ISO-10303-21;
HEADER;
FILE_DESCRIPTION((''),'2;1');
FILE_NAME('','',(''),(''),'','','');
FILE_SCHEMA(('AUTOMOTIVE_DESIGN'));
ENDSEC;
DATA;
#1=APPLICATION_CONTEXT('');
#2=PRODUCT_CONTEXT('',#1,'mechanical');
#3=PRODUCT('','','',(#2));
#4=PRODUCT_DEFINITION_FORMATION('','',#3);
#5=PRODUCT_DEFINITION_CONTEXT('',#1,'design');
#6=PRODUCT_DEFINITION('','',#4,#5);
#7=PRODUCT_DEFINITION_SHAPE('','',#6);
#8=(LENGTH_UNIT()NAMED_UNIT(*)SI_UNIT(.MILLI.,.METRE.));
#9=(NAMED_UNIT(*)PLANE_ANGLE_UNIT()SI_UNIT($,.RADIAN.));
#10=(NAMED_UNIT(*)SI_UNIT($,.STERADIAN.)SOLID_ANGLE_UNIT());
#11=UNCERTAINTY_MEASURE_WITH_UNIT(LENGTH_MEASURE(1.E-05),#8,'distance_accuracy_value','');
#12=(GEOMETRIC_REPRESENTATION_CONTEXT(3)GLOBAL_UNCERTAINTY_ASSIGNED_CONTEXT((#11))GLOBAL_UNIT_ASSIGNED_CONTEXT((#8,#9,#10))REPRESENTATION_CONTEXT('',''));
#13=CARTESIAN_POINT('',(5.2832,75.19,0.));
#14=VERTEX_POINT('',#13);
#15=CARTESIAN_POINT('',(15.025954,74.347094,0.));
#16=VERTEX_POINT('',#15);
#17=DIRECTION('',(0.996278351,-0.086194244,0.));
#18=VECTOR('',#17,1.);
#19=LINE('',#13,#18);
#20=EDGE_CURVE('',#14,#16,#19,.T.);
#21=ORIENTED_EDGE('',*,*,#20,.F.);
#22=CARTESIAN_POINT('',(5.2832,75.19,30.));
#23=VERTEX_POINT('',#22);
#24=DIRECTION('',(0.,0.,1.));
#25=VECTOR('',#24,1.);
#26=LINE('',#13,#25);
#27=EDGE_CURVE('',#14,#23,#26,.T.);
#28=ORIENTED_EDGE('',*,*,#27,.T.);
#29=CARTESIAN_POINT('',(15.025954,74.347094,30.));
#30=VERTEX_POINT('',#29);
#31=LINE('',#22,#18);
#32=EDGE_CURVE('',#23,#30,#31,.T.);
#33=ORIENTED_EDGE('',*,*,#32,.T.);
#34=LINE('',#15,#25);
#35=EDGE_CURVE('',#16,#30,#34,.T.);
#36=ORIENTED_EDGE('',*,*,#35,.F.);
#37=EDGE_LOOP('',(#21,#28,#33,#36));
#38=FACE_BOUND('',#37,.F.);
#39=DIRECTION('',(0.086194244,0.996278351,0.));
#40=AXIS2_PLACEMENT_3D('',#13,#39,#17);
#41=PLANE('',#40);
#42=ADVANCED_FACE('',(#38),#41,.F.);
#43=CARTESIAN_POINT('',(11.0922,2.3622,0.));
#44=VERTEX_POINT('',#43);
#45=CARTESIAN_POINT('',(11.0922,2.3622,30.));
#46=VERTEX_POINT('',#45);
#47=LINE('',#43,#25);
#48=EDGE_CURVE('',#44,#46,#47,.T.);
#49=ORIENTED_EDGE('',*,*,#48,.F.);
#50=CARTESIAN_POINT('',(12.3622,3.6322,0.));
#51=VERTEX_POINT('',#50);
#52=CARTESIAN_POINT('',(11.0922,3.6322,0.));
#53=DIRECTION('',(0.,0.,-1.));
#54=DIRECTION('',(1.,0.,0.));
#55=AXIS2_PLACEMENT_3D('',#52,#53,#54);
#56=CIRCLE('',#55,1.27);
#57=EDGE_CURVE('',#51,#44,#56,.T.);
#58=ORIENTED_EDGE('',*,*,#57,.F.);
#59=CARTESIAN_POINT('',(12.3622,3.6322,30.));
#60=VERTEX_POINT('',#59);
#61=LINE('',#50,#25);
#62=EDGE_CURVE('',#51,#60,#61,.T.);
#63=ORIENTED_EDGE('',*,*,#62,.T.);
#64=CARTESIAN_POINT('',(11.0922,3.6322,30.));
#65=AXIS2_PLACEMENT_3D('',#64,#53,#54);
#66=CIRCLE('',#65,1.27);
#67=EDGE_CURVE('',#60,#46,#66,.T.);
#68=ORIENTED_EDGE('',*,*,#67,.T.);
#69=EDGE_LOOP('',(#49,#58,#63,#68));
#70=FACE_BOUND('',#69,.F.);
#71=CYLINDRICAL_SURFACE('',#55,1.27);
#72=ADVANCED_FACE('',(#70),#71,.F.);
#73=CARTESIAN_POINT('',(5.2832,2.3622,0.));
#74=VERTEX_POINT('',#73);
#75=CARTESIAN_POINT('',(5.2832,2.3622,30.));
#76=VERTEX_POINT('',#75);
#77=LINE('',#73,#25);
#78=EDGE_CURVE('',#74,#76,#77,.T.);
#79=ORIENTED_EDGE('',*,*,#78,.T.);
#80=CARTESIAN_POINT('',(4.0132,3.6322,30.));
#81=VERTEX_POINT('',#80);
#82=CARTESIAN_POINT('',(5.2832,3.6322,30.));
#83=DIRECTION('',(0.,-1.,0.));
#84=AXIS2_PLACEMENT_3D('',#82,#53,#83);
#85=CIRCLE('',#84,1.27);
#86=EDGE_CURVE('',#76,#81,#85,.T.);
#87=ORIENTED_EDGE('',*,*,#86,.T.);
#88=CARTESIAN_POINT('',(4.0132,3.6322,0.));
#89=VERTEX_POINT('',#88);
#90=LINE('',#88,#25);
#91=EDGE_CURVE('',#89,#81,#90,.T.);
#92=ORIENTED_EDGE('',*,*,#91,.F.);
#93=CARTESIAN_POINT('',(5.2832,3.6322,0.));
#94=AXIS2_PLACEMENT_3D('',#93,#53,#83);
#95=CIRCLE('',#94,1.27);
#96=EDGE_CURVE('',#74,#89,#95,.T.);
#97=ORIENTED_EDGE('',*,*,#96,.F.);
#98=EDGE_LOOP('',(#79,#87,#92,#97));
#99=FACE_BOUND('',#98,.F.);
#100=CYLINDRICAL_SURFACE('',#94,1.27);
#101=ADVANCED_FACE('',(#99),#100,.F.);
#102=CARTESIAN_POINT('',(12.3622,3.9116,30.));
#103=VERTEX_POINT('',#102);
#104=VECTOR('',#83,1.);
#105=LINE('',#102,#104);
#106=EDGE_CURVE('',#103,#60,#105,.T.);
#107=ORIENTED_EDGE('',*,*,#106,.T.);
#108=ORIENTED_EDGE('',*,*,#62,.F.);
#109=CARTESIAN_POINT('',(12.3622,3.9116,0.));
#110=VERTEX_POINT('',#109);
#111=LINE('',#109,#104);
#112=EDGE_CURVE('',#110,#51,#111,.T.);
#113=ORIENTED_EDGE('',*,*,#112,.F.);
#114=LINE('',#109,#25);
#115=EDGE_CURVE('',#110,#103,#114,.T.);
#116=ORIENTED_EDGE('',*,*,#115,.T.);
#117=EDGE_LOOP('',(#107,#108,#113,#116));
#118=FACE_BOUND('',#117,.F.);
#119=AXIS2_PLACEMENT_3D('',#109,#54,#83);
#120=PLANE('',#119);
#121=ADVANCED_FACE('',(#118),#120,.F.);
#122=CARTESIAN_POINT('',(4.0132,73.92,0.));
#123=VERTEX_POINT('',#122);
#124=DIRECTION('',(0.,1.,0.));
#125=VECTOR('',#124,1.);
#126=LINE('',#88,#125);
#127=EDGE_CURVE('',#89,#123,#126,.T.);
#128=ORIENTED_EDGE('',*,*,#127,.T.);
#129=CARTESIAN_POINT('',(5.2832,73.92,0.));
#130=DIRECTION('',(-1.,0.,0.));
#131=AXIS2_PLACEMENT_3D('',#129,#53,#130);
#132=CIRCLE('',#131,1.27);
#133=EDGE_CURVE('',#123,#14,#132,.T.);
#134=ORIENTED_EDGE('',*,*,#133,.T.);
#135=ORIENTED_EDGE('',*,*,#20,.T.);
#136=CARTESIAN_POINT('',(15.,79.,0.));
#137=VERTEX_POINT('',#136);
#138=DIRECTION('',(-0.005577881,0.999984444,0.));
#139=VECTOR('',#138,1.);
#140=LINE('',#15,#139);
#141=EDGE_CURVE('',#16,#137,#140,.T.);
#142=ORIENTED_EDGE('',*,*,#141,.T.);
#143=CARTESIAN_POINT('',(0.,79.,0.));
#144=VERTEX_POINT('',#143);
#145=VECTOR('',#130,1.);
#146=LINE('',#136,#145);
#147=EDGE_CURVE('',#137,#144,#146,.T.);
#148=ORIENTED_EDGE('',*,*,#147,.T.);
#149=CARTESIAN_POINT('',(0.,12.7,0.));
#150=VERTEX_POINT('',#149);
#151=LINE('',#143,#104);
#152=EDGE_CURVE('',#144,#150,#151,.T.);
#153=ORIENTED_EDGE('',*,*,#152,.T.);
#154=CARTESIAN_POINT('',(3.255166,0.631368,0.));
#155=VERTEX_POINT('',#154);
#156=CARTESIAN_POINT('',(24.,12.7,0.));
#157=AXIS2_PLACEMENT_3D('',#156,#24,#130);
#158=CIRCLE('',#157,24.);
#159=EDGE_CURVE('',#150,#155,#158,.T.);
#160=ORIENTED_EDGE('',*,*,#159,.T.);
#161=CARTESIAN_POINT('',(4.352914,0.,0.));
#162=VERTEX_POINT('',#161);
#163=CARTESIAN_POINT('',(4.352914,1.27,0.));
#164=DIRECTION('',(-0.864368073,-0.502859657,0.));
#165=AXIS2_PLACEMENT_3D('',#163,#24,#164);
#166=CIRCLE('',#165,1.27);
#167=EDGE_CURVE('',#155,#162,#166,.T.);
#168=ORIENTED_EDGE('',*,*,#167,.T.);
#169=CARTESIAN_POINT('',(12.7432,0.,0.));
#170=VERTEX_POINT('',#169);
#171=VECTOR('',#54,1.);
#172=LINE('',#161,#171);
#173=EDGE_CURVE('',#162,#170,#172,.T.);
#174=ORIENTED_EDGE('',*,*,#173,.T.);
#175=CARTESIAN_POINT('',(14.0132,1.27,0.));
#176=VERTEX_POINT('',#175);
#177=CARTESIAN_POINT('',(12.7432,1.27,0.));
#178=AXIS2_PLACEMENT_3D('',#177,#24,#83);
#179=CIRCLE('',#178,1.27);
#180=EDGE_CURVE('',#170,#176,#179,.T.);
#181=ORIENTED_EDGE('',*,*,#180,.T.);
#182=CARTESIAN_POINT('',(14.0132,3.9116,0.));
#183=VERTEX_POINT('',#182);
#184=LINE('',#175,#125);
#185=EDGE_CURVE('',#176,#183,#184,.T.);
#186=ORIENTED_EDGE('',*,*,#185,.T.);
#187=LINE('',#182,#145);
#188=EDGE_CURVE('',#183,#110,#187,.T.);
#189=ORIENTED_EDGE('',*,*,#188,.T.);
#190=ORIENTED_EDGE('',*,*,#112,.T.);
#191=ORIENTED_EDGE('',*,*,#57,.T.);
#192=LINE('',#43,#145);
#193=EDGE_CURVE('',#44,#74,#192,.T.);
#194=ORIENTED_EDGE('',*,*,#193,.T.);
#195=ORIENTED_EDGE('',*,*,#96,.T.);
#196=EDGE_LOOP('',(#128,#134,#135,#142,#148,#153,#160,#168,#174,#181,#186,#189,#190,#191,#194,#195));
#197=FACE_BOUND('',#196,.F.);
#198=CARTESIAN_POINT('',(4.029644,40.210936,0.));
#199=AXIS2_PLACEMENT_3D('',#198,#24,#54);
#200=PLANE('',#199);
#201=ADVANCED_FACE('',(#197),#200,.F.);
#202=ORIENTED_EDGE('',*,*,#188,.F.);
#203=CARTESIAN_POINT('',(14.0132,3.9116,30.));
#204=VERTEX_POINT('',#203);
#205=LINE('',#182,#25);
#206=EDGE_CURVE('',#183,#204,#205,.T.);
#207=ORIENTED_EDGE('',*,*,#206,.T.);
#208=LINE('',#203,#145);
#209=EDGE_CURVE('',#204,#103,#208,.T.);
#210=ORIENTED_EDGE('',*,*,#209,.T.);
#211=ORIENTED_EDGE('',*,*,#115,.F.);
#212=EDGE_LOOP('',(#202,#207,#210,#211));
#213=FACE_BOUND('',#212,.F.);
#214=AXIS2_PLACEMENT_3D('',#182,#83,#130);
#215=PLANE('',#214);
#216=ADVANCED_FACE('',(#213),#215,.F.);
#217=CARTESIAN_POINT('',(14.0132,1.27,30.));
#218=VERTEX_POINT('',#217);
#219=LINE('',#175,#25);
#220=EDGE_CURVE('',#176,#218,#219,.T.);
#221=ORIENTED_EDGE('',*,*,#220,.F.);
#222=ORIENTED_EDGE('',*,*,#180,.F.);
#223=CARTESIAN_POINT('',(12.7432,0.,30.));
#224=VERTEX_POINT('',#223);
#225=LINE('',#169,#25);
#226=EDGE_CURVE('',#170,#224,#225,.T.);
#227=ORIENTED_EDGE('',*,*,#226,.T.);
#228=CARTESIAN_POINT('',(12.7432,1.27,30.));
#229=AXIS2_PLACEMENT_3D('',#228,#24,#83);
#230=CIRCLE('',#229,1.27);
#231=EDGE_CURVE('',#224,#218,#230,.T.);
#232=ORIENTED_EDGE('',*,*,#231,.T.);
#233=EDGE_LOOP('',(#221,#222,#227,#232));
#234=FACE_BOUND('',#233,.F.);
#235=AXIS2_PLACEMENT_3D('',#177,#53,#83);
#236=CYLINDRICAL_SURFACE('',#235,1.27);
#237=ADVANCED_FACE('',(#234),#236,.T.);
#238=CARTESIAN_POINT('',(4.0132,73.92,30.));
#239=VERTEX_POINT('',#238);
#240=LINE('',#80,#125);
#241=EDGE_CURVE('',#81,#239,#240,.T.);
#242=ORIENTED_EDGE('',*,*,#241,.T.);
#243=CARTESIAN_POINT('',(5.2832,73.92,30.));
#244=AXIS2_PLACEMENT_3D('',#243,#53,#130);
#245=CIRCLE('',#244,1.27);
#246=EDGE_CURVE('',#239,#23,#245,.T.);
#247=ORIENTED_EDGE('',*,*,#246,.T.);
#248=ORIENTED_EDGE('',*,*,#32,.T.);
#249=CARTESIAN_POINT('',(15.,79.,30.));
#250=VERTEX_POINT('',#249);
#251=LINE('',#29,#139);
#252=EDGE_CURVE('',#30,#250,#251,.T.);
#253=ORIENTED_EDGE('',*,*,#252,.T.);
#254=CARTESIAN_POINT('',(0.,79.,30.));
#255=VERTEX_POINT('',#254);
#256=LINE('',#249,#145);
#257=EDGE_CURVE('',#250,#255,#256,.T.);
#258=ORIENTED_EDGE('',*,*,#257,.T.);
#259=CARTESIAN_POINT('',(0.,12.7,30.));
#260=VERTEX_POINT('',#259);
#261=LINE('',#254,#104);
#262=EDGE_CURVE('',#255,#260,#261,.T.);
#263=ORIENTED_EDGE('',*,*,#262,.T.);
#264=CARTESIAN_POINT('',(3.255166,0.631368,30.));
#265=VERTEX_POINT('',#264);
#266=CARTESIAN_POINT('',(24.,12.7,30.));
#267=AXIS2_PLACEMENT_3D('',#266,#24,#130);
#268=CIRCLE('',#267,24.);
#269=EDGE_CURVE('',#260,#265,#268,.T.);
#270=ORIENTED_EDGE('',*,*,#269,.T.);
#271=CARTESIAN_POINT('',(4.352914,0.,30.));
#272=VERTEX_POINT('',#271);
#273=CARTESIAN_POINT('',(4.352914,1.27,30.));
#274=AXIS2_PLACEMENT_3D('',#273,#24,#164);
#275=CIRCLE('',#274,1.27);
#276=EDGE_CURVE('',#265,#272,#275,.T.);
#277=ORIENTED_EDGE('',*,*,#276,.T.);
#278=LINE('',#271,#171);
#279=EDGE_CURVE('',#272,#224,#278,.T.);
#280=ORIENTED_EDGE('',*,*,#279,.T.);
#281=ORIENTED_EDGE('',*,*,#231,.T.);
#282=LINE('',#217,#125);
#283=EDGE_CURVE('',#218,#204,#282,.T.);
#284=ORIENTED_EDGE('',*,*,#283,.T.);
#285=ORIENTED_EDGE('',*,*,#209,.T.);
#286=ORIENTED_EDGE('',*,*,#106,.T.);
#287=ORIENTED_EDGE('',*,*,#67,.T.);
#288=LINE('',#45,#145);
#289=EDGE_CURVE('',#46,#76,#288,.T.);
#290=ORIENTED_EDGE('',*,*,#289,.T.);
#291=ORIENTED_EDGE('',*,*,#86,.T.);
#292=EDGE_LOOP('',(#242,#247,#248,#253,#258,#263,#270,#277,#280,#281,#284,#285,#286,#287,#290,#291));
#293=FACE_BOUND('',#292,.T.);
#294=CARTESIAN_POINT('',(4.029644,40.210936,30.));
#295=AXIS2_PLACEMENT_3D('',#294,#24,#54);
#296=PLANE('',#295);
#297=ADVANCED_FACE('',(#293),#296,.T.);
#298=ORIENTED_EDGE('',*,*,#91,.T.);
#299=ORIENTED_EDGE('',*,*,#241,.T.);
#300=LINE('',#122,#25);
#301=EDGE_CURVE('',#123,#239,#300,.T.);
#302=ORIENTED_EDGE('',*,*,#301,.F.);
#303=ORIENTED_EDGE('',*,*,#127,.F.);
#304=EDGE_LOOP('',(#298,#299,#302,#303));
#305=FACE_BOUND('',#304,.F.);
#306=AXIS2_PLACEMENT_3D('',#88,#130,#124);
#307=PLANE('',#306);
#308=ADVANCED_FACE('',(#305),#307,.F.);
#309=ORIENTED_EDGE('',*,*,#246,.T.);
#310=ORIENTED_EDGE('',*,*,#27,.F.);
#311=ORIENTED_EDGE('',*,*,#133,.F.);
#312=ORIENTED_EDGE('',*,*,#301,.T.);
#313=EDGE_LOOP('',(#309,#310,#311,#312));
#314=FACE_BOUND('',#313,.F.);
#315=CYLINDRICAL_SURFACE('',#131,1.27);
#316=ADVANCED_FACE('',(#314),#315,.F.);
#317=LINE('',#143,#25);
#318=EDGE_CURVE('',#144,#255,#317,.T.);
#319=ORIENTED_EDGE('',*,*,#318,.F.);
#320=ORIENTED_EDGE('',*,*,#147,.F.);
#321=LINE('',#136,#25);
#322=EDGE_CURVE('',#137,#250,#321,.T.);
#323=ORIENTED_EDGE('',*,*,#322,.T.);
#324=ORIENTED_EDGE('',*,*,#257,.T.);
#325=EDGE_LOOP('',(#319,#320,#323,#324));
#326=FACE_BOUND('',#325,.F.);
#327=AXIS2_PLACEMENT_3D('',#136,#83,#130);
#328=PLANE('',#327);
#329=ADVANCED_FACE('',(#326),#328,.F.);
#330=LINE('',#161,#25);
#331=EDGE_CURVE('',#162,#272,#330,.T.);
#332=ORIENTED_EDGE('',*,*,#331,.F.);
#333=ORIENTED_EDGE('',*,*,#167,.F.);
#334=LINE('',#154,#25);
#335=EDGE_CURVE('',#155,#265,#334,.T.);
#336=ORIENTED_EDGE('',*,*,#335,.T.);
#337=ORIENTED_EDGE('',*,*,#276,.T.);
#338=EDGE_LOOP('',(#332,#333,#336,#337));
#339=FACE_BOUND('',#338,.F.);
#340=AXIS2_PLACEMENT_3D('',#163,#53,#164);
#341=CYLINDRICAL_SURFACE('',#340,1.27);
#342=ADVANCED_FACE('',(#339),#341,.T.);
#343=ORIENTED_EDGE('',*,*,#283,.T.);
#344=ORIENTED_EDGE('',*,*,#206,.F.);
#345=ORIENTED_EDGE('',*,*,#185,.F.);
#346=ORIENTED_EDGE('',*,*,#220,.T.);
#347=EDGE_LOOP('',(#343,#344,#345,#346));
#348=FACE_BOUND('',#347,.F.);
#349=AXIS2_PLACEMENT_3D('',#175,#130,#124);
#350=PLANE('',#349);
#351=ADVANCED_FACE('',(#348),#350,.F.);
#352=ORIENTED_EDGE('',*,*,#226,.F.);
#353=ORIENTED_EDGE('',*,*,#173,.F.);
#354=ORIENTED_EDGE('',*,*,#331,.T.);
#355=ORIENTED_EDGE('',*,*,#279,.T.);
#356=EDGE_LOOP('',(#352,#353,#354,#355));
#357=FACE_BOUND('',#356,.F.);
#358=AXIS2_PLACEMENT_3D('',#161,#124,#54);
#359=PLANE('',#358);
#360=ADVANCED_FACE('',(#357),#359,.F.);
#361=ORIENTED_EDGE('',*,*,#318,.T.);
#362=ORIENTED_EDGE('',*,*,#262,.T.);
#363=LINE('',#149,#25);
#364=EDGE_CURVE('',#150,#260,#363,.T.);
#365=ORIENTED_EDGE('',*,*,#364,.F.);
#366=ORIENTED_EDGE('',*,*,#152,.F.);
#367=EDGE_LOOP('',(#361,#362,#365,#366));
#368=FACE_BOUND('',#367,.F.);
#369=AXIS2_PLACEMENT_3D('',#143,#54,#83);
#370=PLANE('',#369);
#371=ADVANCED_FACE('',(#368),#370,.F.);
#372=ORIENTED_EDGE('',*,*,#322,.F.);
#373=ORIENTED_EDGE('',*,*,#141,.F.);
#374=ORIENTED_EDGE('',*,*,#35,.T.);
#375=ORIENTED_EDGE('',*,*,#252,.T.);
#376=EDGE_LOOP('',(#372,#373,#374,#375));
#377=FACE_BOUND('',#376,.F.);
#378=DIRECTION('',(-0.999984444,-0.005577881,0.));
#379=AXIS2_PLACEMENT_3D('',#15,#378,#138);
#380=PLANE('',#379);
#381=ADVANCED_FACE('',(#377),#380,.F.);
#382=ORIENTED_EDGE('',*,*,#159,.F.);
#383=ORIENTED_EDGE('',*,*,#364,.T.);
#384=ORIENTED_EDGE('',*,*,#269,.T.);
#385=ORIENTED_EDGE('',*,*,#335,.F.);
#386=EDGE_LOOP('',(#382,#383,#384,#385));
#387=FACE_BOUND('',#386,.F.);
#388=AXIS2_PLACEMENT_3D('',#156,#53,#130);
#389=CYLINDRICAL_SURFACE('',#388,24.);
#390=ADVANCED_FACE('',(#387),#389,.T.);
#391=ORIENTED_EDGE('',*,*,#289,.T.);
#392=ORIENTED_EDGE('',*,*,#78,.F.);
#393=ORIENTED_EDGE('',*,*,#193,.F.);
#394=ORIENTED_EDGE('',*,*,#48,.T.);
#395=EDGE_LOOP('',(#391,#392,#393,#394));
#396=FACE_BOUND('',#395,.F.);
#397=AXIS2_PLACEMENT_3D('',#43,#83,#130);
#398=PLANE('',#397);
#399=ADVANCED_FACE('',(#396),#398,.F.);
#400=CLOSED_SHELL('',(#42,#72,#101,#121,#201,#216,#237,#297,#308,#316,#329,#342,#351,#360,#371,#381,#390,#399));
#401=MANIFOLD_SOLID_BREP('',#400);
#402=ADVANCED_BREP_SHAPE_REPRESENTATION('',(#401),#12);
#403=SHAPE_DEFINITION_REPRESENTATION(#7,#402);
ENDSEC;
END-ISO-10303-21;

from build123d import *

# Parameters (mm, degrees)
F1_DEPTH = 30


# Not quite as in the source:
# - a feature names something its author has since deleted; it is built from what else it names


with BuildPart() as f1:
    # F0 (on Top) → F1 (new body)
    with BuildSketch(Plane.XY):
        with BuildLine():
            Line((15.0259537622, 74.3470937014), (15, 79))
            Line((15, 79), (0, 79))
            Line((0, 79), (0, 12.7))
            ThreePointArc((0, 12.7), (0.8280772268, 6.4500404007), (3.2551662494, 0.6313682358))
            ThreePointArc((3.2551662494, 0.6313682358), (3.719732188, 0.1690998364), (4.352913702, 0))
            Line((4.352913702, 0), (12.7432, 0))
            ThreePointArc((12.7432, 0), (13.6412256121, 0.3719743879), (14.0132, 1.27))
            Line((14.0132, 1.27), (14.0132, 3.9116))
            Line((14.0132, 3.9116), (12.3622, 3.9116))
            Line((12.3622, 3.9116), (12.3622, 3.6322))
            ThreePointArc((12.3622, 3.6322), (11.9902256121, 2.7341743879), (11.0922, 2.3622))
            Line((11.0922, 2.3622), (5.2832, 2.3622))
            ThreePointArc((5.2832, 2.3622), (4.3851743879, 2.7341743879), (4.0132, 3.6322))
            Line((4.0132, 3.6322), (4.0132, 73.92))
            ThreePointArc((4.0132, 73.92), (4.3851743879, 74.8180256121), (5.2832, 75.19))
            Line((5.2832, 75.19), (15.0259537622, 74.3470937014))
        make_face()
    extrude(amount=F1_DEPTH)


solid = f1.part
